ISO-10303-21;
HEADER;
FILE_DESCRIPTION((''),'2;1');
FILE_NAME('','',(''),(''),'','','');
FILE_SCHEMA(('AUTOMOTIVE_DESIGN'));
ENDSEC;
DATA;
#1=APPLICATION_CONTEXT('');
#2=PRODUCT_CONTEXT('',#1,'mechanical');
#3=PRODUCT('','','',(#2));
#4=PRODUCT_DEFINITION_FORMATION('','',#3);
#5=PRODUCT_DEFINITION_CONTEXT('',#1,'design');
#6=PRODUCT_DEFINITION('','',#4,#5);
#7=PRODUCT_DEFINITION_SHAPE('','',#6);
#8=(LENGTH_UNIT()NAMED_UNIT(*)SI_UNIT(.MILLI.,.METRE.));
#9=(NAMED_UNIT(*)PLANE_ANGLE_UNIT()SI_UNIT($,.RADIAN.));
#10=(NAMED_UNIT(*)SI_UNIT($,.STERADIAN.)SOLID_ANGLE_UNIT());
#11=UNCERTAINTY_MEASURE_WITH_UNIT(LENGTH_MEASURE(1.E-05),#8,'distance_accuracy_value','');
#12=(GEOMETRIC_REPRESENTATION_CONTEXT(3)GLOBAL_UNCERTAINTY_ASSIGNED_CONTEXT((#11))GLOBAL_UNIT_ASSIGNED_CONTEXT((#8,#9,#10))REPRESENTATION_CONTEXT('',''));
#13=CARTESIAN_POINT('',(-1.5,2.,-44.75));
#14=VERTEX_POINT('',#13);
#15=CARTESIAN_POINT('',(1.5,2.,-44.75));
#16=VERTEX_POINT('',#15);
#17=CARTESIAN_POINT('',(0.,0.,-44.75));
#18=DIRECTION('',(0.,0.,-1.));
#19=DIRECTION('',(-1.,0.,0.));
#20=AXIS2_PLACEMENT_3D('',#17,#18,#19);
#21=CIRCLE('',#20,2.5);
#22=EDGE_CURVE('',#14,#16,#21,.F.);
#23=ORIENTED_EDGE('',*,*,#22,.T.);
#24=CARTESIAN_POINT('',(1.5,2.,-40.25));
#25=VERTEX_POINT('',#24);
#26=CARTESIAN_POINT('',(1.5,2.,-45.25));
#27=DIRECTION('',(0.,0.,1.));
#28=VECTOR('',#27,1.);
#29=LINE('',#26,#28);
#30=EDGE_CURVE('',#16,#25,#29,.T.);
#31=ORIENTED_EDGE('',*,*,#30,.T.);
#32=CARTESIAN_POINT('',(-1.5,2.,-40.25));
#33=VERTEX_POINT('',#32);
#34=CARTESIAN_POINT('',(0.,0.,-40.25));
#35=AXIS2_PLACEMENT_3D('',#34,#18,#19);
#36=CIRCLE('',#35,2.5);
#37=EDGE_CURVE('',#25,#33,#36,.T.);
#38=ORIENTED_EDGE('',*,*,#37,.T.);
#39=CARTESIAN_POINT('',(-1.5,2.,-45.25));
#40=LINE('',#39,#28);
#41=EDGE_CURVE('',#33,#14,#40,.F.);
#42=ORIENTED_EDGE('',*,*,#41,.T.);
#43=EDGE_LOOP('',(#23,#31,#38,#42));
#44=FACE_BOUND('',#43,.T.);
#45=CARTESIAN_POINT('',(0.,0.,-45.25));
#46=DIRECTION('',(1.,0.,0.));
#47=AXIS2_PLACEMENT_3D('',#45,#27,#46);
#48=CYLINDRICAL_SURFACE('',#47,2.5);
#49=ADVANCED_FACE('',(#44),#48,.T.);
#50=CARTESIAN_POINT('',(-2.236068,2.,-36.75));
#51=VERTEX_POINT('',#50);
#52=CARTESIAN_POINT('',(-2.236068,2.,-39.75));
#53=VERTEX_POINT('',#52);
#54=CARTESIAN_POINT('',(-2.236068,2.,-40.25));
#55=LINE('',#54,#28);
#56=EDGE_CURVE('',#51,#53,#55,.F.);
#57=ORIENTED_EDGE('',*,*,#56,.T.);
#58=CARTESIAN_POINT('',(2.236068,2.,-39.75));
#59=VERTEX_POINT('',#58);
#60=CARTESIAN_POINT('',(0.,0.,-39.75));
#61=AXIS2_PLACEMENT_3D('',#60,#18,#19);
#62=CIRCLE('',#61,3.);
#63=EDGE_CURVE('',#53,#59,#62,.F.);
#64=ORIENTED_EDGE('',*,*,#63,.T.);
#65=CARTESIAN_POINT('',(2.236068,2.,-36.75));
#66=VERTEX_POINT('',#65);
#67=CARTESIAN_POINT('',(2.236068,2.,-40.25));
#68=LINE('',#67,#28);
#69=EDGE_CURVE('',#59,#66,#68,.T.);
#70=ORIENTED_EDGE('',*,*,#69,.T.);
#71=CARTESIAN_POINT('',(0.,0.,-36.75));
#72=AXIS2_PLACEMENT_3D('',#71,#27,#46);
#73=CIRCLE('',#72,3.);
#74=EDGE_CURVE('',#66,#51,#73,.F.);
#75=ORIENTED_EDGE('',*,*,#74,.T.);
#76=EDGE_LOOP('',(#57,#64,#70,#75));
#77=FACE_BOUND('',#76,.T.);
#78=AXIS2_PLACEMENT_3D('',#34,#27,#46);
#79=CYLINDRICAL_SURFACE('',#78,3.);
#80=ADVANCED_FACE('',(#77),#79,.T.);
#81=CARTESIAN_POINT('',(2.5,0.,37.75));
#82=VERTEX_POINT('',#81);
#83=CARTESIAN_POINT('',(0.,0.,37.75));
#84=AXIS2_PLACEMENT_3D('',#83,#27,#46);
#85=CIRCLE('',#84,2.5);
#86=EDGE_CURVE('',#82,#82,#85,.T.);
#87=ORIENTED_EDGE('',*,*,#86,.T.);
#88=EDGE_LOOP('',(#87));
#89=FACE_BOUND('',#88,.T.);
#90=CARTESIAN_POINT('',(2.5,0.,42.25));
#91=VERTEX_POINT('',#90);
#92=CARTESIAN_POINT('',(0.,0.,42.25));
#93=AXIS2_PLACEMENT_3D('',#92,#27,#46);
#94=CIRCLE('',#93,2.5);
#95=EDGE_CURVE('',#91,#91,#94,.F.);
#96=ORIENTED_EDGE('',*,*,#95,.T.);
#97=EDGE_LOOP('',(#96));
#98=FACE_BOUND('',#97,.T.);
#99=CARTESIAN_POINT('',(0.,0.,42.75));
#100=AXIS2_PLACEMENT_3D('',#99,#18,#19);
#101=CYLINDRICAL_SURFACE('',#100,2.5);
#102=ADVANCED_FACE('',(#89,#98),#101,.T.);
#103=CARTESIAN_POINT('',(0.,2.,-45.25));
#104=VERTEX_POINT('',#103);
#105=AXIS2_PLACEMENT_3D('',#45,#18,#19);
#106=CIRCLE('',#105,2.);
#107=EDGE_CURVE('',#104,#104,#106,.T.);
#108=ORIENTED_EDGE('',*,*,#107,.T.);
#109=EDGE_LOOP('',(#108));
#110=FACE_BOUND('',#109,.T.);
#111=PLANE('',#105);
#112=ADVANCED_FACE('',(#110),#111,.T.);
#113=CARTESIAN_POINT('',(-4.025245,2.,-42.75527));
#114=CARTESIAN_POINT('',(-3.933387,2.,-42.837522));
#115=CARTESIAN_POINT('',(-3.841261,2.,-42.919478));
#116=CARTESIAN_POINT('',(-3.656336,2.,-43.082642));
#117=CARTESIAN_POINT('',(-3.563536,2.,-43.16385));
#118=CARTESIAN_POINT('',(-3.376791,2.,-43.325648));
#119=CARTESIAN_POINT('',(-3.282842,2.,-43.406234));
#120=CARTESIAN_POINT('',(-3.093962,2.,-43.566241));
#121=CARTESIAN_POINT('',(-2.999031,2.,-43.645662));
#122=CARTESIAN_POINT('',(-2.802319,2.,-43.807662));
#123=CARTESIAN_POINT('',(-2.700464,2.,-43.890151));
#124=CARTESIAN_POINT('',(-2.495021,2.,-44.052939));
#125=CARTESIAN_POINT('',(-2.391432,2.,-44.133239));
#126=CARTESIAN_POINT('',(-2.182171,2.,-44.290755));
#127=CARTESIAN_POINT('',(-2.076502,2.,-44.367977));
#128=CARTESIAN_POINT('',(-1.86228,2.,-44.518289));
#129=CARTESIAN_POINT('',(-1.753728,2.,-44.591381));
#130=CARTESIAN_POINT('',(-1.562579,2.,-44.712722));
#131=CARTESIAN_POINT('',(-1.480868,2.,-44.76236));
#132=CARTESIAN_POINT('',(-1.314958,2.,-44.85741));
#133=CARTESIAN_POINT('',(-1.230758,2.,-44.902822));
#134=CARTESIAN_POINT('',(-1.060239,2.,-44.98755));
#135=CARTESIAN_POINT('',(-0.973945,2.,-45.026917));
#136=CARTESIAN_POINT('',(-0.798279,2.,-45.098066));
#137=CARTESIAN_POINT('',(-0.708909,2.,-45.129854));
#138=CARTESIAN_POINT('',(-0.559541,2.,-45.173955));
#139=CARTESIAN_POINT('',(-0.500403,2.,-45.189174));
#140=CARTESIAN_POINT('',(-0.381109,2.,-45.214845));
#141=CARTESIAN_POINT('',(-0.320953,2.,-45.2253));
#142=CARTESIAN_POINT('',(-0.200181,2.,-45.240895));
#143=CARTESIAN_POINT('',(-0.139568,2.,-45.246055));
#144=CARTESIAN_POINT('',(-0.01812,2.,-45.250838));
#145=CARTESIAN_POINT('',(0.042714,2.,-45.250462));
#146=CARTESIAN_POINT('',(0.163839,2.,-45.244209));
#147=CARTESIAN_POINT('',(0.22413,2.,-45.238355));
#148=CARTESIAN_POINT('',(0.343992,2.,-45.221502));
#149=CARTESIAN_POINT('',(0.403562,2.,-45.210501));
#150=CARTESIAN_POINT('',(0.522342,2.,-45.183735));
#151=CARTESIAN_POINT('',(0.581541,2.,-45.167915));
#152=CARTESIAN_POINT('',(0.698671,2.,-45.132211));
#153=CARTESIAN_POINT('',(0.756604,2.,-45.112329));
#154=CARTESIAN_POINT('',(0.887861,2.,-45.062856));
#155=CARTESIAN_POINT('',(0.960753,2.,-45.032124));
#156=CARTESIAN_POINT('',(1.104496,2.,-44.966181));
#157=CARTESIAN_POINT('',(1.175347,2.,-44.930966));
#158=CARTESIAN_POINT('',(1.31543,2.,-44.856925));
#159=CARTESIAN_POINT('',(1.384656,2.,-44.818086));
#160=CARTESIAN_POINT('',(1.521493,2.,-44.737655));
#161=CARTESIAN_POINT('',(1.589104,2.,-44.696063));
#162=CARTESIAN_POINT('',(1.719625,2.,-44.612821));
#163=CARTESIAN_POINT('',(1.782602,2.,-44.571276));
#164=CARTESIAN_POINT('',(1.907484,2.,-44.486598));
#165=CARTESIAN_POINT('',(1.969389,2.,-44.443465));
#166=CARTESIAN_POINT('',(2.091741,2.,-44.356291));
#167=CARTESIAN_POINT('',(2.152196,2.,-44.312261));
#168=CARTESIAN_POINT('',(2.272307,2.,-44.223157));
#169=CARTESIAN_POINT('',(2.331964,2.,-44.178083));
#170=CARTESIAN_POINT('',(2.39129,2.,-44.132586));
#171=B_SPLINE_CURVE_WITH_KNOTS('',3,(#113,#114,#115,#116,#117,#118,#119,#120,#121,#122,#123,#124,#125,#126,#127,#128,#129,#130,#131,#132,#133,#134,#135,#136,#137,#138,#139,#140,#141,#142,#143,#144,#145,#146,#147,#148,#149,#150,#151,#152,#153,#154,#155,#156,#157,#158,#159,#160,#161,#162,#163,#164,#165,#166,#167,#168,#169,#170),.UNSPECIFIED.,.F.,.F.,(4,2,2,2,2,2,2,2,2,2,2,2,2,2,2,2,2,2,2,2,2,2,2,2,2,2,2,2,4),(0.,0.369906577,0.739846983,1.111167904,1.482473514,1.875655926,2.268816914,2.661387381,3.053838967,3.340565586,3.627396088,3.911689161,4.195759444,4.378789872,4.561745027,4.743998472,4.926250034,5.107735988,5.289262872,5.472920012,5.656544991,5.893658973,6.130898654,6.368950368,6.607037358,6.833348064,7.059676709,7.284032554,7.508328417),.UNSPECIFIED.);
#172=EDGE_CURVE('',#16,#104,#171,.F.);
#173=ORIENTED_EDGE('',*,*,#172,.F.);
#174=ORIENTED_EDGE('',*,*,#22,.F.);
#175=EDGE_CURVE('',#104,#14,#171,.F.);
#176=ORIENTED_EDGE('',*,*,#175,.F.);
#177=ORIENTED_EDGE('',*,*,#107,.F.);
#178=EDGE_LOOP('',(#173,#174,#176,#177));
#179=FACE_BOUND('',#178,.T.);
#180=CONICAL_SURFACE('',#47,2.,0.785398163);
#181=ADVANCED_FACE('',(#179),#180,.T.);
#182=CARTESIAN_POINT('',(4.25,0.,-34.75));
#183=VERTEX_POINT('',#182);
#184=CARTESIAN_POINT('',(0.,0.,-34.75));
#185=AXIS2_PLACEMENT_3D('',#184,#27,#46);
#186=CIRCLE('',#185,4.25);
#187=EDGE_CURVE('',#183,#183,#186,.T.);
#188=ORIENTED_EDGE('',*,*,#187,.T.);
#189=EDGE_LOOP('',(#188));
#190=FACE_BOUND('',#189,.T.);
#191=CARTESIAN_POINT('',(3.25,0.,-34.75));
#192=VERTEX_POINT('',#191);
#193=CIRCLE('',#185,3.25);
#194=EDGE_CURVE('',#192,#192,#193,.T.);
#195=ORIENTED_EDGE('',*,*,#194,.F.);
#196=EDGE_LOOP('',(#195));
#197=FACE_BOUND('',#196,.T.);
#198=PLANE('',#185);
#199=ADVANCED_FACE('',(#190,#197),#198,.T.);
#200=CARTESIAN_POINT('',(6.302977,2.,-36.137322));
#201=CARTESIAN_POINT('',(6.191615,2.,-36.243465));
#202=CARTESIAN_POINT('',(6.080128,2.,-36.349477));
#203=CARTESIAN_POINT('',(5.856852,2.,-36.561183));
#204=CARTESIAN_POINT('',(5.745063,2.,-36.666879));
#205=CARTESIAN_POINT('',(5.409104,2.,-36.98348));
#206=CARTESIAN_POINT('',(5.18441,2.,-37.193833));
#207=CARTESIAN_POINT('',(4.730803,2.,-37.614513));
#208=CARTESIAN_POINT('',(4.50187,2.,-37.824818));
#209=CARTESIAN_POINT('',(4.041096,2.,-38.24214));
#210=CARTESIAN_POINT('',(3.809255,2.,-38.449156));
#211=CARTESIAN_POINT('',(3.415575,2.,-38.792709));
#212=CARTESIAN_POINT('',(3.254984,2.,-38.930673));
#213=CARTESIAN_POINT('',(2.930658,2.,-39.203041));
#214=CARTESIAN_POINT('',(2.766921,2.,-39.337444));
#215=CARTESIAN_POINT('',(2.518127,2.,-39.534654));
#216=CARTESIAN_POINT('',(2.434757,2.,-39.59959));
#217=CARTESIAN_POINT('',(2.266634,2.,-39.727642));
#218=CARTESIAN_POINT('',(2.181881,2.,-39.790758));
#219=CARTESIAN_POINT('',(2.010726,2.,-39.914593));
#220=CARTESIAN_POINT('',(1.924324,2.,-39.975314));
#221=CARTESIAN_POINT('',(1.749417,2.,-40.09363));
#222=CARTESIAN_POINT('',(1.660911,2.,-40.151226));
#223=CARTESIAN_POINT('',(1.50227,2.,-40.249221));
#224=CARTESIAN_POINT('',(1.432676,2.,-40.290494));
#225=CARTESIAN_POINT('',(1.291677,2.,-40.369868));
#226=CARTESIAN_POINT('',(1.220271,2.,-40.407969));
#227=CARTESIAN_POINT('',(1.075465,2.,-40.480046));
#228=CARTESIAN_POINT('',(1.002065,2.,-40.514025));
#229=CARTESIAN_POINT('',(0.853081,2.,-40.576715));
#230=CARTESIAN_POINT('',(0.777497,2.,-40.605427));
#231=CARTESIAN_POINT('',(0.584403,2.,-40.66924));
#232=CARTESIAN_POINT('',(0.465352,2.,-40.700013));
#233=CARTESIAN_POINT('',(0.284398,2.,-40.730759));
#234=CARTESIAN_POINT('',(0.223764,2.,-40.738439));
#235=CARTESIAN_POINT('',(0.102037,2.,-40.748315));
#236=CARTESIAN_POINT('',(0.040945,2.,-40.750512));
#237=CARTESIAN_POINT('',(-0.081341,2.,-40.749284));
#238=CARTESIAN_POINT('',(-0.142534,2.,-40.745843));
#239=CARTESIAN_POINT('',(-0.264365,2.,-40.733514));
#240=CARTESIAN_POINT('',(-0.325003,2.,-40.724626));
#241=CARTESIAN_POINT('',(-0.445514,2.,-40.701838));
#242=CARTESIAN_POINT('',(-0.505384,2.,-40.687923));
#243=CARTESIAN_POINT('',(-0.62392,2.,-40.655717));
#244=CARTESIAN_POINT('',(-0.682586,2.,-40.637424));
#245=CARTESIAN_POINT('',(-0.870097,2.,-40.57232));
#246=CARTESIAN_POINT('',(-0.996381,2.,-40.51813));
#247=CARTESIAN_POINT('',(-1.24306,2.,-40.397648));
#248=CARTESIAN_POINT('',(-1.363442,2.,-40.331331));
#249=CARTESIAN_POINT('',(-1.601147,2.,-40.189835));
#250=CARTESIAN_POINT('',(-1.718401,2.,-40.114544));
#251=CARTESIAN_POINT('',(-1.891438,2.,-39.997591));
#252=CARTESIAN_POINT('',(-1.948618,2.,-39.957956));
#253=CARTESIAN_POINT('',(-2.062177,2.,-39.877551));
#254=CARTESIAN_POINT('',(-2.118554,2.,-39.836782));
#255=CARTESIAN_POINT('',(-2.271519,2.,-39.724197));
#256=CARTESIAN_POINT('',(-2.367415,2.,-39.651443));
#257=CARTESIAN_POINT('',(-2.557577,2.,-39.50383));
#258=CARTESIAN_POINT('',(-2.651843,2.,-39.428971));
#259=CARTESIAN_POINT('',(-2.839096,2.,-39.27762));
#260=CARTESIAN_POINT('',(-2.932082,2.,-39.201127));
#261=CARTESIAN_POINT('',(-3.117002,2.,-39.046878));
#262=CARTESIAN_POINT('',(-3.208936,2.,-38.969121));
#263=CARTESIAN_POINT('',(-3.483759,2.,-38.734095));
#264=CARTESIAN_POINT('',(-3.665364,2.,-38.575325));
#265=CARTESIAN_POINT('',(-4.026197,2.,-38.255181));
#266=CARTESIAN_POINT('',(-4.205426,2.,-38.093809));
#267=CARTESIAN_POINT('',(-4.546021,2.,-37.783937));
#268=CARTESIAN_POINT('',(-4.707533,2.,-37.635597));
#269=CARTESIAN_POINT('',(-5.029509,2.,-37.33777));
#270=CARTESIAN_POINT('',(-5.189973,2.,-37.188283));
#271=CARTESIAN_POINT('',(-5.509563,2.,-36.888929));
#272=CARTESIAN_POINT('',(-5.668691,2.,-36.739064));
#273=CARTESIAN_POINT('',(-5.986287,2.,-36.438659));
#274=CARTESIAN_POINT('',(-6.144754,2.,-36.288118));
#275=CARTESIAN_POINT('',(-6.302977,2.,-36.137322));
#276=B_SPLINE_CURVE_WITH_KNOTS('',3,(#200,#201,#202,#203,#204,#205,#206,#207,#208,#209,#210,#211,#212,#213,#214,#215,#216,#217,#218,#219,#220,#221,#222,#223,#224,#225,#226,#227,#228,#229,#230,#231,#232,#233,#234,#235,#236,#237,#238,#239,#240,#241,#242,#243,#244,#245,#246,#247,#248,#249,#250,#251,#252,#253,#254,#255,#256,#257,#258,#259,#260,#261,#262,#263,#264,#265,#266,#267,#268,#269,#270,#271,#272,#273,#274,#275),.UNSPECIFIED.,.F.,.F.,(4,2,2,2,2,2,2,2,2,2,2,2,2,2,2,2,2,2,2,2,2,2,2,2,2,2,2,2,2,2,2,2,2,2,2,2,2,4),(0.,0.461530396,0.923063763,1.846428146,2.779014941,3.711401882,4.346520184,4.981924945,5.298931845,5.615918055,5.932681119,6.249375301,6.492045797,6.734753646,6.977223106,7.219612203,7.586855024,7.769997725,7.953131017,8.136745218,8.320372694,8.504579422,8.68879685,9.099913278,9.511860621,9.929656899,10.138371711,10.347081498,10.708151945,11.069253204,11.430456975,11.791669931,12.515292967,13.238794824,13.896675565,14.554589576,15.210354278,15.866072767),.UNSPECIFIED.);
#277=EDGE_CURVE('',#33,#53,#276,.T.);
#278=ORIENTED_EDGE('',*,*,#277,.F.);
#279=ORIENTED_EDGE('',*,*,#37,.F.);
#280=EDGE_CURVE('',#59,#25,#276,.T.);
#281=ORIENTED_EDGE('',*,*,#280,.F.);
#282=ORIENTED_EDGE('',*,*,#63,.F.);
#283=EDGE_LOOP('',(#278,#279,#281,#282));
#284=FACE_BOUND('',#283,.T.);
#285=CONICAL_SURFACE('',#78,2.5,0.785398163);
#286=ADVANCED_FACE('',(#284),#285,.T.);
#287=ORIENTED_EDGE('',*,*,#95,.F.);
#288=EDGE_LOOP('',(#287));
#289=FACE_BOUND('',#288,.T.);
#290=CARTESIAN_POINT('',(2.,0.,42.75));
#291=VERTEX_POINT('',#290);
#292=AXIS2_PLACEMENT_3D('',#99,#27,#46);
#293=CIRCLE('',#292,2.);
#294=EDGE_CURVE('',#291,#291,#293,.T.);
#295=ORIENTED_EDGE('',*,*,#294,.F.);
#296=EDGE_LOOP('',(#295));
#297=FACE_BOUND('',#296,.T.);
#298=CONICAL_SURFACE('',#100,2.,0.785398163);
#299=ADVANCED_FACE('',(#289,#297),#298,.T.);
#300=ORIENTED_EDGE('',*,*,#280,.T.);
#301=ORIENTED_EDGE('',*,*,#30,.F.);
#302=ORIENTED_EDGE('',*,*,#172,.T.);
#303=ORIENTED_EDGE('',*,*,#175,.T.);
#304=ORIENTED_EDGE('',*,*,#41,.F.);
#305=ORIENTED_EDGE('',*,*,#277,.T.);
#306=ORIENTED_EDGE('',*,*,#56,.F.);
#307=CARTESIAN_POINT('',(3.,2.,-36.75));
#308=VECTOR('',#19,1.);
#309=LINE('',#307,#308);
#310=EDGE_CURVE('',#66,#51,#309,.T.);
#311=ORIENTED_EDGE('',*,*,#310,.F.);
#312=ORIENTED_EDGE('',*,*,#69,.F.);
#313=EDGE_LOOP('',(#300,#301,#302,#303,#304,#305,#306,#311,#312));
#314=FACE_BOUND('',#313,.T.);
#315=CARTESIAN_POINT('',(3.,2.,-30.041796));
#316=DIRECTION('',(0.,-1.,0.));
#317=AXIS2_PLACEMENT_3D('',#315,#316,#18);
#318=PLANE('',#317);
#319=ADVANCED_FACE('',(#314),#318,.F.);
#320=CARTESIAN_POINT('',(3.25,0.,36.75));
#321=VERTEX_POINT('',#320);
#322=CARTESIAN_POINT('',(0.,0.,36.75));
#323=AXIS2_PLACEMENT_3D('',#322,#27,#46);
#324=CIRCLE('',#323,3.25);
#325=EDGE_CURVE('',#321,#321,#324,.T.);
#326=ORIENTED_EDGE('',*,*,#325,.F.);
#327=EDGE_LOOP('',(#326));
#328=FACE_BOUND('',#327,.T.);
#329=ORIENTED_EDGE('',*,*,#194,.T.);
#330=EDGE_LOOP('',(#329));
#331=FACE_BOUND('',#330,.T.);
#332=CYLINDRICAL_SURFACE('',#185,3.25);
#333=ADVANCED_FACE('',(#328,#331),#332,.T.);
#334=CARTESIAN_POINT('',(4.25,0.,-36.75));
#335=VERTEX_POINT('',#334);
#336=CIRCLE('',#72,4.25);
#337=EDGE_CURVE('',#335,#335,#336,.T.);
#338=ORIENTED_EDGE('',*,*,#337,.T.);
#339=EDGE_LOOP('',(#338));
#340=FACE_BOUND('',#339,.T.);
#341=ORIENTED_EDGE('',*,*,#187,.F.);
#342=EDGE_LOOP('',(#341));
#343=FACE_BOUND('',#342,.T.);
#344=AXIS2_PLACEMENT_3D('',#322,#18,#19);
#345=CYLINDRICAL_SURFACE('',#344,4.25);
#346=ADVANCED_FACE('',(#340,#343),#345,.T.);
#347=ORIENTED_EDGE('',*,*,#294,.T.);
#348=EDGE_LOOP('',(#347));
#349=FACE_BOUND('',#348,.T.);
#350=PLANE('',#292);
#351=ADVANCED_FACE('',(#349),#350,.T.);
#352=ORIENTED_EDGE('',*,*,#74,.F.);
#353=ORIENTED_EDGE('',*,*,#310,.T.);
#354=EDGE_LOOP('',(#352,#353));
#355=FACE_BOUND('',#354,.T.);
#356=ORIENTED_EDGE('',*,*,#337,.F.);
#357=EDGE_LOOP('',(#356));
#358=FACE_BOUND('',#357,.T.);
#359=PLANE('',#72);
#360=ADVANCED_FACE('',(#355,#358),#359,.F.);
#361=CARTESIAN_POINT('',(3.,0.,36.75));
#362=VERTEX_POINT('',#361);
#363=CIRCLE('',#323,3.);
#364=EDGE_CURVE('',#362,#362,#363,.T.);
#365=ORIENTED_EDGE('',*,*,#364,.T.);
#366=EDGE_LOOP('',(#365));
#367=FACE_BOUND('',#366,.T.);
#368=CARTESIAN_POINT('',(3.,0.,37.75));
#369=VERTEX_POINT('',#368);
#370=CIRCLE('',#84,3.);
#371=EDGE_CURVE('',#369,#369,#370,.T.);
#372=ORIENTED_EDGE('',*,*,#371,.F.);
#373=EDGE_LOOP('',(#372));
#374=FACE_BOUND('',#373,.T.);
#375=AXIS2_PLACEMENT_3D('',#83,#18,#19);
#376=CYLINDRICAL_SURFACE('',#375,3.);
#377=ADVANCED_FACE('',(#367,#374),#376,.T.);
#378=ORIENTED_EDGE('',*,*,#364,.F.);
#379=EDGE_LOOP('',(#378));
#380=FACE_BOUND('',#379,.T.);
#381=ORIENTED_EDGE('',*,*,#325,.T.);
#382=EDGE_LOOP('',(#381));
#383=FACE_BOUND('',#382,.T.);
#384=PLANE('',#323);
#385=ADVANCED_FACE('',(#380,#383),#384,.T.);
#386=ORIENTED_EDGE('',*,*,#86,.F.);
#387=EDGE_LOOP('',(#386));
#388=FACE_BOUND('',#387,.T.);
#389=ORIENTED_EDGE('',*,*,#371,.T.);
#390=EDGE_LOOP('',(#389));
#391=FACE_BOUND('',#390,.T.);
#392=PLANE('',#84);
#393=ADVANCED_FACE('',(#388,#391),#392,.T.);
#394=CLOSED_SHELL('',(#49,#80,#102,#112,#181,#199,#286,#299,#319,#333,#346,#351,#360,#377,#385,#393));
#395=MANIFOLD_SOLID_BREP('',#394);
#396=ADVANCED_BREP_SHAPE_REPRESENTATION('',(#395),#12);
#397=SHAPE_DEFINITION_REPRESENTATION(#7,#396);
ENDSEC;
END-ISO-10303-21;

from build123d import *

# Parameters (mm, degrees)
SKETCH_1_R          = 4.25
EXTRUDE_1_DEPTH     = 36.75
SKETCH_2_R          = 3
EXTRUDE_2_DEPTH     = 1
SKETCH_3_R          = 2.5
EXTRUDE_3_DEPTH     = 5
EXTRUDE_START       = 3.5
SKETCH_4_R          = 3
EXTRUDE_4_DEPTH     = 3.5
EXTRUDE_START_2     = 5
SKETCH_5_R          = 2.5
EXTRUDE_5_DEPTH     = 5
CHAMFER_1_SIZE      = 0.5
CHAMFER_2_SIZE      = 0.5
CUT_EXTRUDE_6_REACH = 90.205
SKETCH_6_W          = 6
SKETCH_6_H          = 3
SKETCH_7_R          = 4.25
SKETCH_7_R_2        = 3.25
CUT_EXTRUDE_1_DEPTH = 71.5


with BuildPart() as part:
    # 草图1 → 拉伸1 (new, symmetric)
    with BuildSketch(Plane.XY):
        Circle(SKETCH_1_R)
    extrude(amount=EXTRUDE_1_DEPTH, both=True)

    # 草图2 → 拉伸2 (add)
    with BuildSketch(Plane.XY.offset(36.75)):
        Circle(SKETCH_2_R)
    extrude(amount=EXTRUDE_2_DEPTH)

    # 草图3 → 拉伸3 (add)
    with BuildSketch(Plane.XY.offset(37.75)):
        Circle(SKETCH_3_R)
    extrude(amount=EXTRUDE_3_DEPTH)

    # 草图4 → 拉伸4 (add)
    with BuildSketch(Plane(origin=(0, 0, -36.75), x_dir=(-1, 0, 0), z_dir=(0, 0, -1)).offset(EXTRUDE_START)):
        with Locations(Location((0, 0, 0), (0, 0, 180))):
            Circle(SKETCH_4_R)
    extrude(amount=-EXTRUDE_4_DEPTH)

    # 草图5 → 拉伸5 (add)
    with BuildSketch(Plane(origin=(0, 0, -40.25), x_dir=(-1, 0, 0), z_dir=(0, 0, -1)).offset(EXTRUDE_START_2)):
        with Locations(Location((0, 0, 0), (0, 0, 180))):
            Circle(SKETCH_5_R)
    extrude(amount=-EXTRUDE_5_DEPTH)

    # 倒角1
    chamfer_1_edges = [part.edges().sort_by_distance(p)[0] for p in [
        (-2.5, 0, 42.75),
        (-2.5, 0, -45.25),
    ]]
    chamfer(chamfer_1_edges, length=CHAMFER_1_SIZE)

    # 倒角2
    chamfer_2_edges = [part.edges().sort_by_distance(p)[0] for p in [
        (-3, 0, -40.25),
    ]]
    chamfer(chamfer_2_edges, length=CHAMFER_2_SIZE - 0.0001)  # a hair under: the kernel refuses the full size

    # 拉伸6: up to this face of the body (flat: up to its plane)
    cut_extrude_6_end = Plane(part.part.faces().sort_by_distance((-4.129791847, 0, -36.75))[0])
    # 草图6 → 拉伸6 (cut, up to the picked face)
    with BuildSketch(Plane(origin=(0, 0, -45.25), x_dir=(-1, 0, 0), z_dir=(0, 0, -1)), mode=Mode.PRIVATE) as cut_extrude_6_sk1:
        with Locations((0, 3.5)):
            Rectangle(SKETCH_6_W, SKETCH_6_H)
    cut_extrude_6_tool1 = split(extrude(cut_extrude_6_sk1.sketch, amount=-CUT_EXTRUDE_6_REACH, mode=Mode.PRIVATE), bisect_by=cut_extrude_6_end, keep=Keep.BOTH, mode=Mode.PRIVATE)
    add(cut_extrude_6_tool1.solids().sort_by(Axis((0, 3.5, -45.25), (0, 0, 1)))[0], mode=Mode.SUBTRACT)

    # 草图7 → 切除-拉伸1 (cut)
    with BuildSketch(Plane.XY.offset(36.75)):
        Circle(SKETCH_7_R)
        Circle(SKETCH_7_R_2, mode=Mode.SUBTRACT)
    extrude(amount=-CUT_EXTRUDE_1_DEPTH, mode=Mode.SUBTRACT)


solid = part.part
